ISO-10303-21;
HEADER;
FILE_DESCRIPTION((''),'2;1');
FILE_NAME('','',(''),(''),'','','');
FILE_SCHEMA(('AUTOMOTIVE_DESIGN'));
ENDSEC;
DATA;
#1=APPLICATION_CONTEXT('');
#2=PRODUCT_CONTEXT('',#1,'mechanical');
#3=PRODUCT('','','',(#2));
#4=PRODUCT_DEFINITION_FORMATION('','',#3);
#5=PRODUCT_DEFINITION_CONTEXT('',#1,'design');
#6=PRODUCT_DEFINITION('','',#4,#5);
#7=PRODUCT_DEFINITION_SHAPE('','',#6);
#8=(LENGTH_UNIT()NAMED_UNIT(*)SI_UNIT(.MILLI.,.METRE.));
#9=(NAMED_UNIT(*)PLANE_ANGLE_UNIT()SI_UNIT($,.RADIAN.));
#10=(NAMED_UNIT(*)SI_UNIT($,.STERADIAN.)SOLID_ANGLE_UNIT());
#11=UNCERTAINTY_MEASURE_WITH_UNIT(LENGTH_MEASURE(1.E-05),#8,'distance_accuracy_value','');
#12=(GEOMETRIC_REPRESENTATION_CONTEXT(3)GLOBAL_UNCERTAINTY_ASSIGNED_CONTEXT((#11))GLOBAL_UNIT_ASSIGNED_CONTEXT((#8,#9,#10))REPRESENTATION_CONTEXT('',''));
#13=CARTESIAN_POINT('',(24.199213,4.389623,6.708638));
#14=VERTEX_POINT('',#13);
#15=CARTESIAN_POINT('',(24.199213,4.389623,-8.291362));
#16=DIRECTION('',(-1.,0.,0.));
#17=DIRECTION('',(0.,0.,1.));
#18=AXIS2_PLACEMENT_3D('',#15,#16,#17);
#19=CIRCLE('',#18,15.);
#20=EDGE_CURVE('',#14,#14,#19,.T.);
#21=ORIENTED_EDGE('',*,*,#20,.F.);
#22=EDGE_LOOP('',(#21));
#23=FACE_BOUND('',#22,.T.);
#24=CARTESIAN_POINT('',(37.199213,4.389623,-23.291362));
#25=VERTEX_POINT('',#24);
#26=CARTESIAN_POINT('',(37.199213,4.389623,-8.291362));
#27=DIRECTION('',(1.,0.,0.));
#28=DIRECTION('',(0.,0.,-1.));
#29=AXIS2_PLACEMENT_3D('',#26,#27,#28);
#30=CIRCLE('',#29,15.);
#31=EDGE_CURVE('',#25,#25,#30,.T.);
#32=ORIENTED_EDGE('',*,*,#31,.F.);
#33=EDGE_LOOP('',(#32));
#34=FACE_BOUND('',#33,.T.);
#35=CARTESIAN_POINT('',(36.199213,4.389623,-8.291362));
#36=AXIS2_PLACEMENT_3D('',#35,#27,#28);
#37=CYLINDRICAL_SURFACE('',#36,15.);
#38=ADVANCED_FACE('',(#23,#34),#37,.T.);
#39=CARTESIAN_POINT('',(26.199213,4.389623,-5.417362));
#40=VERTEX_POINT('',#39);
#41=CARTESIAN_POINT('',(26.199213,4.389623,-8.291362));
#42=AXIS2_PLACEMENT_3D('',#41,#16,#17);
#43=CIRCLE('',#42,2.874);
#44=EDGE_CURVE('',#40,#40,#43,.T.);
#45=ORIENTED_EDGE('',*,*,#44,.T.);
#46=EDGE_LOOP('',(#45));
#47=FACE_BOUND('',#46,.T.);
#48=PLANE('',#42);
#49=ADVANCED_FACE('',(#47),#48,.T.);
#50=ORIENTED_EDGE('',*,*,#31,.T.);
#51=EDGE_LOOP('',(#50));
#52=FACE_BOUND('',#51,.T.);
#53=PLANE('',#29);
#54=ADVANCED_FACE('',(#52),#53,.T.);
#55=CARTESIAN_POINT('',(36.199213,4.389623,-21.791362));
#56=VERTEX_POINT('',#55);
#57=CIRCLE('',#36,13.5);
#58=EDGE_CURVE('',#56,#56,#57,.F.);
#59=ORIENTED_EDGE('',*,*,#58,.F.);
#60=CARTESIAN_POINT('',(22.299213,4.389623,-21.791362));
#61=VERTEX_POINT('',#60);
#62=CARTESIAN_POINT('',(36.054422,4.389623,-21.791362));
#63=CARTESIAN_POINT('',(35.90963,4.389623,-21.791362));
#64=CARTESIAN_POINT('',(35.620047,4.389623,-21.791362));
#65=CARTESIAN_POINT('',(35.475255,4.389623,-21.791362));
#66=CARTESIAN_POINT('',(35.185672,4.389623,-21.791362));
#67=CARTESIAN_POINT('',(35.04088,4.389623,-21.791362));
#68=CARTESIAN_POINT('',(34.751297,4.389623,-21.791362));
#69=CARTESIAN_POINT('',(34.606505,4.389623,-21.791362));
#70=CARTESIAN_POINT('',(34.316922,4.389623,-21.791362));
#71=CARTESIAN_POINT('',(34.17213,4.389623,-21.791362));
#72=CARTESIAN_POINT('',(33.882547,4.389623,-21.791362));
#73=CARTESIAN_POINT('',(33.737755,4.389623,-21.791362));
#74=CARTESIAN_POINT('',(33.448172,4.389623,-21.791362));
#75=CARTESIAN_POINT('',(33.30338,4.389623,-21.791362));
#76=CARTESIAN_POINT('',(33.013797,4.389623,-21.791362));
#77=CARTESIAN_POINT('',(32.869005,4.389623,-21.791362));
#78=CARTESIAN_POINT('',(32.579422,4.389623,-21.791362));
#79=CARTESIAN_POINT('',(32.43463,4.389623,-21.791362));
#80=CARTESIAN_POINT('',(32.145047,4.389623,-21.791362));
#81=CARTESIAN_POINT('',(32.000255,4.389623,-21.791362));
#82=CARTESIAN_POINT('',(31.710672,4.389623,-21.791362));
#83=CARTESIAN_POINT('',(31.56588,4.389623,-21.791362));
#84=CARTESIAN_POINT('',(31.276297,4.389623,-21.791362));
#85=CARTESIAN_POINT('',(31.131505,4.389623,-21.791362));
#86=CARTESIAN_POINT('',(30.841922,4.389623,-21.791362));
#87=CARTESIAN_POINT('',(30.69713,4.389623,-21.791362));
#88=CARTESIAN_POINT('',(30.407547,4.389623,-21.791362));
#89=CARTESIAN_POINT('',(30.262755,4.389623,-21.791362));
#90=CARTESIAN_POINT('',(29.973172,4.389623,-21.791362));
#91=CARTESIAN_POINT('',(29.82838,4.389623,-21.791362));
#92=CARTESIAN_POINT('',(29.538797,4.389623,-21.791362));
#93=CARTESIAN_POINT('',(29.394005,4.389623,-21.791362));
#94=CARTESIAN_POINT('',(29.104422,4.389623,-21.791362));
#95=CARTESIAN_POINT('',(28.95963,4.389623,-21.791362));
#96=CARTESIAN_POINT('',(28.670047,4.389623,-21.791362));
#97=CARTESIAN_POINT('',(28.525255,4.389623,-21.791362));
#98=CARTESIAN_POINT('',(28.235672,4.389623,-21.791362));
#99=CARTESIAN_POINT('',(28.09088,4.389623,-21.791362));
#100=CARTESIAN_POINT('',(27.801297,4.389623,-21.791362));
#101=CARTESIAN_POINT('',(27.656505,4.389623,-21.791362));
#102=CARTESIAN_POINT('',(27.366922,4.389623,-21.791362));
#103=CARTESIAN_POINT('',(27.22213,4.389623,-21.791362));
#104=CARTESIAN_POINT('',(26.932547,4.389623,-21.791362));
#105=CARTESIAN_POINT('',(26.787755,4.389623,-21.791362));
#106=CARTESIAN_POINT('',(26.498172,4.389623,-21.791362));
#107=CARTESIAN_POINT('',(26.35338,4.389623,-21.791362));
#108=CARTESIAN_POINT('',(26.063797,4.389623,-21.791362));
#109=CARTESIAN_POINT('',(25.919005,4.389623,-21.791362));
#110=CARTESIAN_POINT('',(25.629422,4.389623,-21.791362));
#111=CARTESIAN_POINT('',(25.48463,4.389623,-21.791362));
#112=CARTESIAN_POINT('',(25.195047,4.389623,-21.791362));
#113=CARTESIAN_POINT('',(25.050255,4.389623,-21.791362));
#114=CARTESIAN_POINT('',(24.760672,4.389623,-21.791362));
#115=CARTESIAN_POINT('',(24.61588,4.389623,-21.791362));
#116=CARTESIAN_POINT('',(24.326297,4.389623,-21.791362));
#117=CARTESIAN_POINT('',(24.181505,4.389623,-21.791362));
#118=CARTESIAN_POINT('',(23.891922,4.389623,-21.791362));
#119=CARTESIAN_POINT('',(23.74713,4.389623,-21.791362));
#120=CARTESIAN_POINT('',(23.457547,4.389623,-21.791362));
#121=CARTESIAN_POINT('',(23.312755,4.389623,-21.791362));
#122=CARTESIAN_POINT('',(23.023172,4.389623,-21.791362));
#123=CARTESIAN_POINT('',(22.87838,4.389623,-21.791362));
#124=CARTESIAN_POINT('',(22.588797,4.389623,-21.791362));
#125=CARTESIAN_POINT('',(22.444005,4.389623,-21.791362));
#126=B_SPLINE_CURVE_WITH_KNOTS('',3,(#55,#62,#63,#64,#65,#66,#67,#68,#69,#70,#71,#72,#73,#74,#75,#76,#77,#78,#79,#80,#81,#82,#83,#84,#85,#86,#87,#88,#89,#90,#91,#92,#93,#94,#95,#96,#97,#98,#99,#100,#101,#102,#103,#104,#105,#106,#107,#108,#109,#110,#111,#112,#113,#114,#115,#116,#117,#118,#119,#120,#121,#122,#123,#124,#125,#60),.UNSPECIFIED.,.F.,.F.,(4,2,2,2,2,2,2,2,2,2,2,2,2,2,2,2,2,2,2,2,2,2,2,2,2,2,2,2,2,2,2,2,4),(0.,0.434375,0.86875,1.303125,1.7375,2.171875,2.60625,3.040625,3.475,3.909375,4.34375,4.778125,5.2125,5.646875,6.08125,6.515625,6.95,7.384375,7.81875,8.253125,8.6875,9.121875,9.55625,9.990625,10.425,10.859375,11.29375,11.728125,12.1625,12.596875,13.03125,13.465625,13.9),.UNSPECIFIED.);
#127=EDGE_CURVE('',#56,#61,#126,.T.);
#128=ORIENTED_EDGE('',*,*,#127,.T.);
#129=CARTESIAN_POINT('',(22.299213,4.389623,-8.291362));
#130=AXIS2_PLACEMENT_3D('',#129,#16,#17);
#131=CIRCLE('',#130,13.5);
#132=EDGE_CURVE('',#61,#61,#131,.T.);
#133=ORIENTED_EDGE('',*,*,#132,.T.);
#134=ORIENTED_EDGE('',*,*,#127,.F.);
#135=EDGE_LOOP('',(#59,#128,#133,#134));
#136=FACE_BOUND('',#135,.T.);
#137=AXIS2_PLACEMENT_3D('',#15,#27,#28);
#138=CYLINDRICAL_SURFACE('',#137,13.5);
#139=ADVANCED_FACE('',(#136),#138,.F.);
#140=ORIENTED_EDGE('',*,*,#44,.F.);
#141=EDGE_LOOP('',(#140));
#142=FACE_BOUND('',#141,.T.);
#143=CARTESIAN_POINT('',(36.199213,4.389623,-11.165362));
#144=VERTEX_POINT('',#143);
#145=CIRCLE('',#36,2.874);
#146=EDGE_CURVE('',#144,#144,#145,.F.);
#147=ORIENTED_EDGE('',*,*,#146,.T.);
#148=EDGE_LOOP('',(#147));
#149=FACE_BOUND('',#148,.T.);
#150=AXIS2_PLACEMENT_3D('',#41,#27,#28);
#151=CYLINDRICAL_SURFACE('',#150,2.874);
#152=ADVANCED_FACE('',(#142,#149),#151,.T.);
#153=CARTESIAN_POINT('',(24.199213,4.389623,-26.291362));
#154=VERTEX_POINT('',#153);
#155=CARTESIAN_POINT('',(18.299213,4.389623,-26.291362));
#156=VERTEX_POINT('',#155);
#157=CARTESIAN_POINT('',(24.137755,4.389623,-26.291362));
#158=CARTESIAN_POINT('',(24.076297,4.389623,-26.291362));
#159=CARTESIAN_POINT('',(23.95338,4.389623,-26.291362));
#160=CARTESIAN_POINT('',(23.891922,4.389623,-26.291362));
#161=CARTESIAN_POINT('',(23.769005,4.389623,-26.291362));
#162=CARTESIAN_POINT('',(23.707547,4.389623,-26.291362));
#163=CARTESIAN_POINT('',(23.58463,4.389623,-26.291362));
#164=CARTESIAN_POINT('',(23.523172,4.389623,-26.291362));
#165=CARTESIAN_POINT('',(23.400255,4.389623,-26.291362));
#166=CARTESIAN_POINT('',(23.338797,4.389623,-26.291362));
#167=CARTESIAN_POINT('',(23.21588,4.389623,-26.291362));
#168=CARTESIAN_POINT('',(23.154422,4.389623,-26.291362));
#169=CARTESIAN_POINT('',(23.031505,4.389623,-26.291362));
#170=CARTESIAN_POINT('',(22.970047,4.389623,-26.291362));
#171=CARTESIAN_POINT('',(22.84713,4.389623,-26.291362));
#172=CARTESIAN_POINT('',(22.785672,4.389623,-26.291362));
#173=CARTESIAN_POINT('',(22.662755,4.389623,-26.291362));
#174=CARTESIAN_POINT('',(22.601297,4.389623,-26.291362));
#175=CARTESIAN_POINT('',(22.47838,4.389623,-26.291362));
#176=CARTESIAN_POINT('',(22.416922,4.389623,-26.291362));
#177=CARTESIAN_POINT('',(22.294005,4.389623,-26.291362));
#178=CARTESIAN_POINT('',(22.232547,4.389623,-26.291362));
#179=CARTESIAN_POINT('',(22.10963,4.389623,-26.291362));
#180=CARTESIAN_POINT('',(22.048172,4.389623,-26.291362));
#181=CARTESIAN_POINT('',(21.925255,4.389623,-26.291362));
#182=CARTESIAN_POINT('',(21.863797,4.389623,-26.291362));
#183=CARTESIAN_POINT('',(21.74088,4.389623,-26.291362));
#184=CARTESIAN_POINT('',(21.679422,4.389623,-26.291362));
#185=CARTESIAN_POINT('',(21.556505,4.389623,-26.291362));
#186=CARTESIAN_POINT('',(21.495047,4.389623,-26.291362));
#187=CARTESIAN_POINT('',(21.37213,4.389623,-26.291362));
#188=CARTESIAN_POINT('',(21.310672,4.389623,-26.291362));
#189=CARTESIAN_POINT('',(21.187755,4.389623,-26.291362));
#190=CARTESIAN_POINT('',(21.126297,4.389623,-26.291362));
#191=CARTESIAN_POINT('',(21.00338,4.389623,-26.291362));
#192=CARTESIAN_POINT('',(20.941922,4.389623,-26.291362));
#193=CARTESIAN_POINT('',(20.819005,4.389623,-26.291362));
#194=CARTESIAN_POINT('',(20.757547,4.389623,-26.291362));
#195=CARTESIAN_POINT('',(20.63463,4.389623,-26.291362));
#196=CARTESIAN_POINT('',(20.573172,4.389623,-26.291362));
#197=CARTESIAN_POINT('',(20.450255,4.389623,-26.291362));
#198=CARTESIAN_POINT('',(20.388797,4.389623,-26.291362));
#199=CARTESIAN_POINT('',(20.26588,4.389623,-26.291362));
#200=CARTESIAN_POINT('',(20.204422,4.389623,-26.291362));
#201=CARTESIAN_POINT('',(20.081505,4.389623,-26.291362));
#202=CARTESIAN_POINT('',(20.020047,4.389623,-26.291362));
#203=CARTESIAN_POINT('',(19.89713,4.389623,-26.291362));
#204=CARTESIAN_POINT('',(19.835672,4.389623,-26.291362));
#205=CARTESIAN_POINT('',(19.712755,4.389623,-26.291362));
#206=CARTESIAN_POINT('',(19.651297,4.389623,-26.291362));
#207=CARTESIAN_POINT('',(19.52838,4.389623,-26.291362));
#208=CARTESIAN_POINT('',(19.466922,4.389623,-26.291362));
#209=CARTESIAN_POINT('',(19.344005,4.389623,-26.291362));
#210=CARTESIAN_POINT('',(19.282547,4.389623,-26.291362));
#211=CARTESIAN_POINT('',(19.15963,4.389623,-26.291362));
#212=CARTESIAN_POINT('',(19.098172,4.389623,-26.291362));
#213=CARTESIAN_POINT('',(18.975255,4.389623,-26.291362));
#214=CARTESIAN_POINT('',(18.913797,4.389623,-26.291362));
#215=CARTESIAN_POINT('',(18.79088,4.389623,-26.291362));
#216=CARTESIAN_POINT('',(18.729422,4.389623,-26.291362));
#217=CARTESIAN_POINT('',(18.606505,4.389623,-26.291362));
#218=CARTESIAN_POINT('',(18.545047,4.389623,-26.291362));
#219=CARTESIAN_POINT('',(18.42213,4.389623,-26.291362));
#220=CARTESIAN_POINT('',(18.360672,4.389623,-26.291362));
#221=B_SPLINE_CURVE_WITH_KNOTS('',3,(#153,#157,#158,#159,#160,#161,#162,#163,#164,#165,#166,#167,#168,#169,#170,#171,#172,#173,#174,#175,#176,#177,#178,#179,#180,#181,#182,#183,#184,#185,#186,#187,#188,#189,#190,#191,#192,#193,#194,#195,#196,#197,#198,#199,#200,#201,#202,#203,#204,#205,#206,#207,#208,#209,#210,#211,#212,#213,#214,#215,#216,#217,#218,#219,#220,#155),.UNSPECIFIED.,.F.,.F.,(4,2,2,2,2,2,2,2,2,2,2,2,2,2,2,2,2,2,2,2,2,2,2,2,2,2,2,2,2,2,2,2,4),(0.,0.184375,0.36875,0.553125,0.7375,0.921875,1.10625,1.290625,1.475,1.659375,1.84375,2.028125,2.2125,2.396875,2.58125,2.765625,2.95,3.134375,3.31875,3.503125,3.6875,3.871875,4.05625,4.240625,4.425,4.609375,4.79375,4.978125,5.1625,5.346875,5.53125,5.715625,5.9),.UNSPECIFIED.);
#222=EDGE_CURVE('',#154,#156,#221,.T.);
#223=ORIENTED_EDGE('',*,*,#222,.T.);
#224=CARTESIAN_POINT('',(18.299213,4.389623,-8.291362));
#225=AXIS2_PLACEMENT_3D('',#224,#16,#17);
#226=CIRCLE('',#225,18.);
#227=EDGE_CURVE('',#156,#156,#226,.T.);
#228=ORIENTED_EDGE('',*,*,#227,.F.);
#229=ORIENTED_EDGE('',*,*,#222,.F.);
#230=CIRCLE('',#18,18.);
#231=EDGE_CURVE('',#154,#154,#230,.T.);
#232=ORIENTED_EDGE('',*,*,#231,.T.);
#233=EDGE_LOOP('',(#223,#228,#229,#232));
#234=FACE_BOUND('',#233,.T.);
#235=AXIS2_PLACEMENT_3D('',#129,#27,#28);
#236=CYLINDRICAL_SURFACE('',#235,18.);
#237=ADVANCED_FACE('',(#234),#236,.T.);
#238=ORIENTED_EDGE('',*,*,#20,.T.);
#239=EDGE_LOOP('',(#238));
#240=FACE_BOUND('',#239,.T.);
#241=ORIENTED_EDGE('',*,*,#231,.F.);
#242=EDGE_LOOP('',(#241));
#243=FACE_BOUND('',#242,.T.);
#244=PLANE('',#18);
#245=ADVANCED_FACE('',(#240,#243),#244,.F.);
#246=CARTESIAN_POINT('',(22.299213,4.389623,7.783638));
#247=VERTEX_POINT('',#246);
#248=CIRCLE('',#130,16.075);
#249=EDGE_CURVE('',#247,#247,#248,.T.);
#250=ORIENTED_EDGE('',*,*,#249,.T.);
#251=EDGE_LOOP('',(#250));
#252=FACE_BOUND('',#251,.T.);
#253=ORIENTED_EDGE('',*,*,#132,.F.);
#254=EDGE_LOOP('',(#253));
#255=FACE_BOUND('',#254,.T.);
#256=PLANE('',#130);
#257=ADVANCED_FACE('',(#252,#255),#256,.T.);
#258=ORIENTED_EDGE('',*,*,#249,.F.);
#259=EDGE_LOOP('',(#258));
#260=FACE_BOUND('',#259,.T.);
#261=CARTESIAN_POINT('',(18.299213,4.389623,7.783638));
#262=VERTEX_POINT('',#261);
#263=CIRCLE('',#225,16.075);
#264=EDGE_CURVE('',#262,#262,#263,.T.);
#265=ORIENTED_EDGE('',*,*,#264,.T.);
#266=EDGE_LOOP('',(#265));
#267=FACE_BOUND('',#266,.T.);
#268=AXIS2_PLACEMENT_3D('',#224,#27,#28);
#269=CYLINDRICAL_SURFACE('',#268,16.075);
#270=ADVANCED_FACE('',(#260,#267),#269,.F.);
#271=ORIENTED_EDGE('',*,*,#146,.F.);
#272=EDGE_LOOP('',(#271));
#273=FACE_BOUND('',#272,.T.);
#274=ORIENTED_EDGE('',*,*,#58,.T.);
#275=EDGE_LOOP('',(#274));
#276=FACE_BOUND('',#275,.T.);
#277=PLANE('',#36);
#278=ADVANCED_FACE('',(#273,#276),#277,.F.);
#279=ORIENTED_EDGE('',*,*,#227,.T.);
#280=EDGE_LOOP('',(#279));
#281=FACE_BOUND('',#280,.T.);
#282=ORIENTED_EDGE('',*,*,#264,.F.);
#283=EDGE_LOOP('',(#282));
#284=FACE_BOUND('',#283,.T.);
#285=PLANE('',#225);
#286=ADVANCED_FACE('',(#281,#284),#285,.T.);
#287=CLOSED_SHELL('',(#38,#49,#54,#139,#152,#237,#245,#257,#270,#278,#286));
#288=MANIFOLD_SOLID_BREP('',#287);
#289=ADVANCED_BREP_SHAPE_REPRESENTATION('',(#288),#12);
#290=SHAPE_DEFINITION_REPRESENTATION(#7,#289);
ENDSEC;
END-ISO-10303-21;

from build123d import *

# Parameters (mm, degrees)
SPUR_START             = 15.199213342
SPUR_GEAR_AM_OUTLINE_R = 1.5
SPUR_GEAR_AM_DEPTH     = 12
SKETCH9_R              = 1.5
BOSS_EXTRUDE1_DEPTH    = 12
SKETCH10_R             = 2.874
BOSS_EXTRUDE2_DEPTH    = 10
SKETCH11_R             = 15
BOSS_EXTRUDE3_DEPTH    = 1
SKETCH12_R             = 15
SKETCH12_R_2           = 13.5
BOSS_EXTRUDE4_DEPTH    = 13
SKETCH13_R             = 18
SKETCH13_R_2           = 13.5
BOSS_EXTRUDE5_DEPTH    = 1.9
SKETCH14_R             = 18
SKETCH14_R_2           = 16.075
BOSS_EXTRUDE6_DEPTH    = 4
SKETCH17_R             = 4
CUT_EXTRUDE2_DEPTH     = 41.416963439
SKETCH19_R             = 2.874
BOSS_EXTRUDE7_DEPTH    = 10


# Read off the part's stored shape, not the designer's step: spur gear_am
with BuildPart() as part:
    # spur gear_am outline → spur gear_am (new body)
    with BuildSketch(Plane.YZ.offset(SPUR_START)):
        with BuildLine():
            ThreePointArc((2.747947228, -4.643773619), (2.654088149, -4.687486435), (2.561391914, -4.733613923))
            ThreePointArc((2.561391914, -4.733613923), (2.561783739, -5.337982285), (2.816889806, -5.88587111))
            ThreePointArc((2.816889806, -5.88587111), (2.597713415, -6.044378226), (2.394409068, -6.222788256))
            ThreePointArc((2.394409068, -6.222788256), (1.9170234, -5.852161498), (1.327895004, -5.717294884))
            ThreePointArc((1.327895004, -5.717294884), (1.262297175, -5.797402699), (1.198794721, -5.879181519))
            ThreePointArc((1.198794721, -5.879181519), (1.461373347, -6.423528591), (1.928936024, -6.806472991))
            ThreePointArc((1.928936024, -6.806472991), (1.800238579, -7.04438004), (1.694476903, -7.293332374))
            ThreePointArc((1.694476903, -7.293332374), (1.103558354, -7.166539081), (0.514255579, -7.300641692))
            ThreePointArc((0.514255579, -7.300641692), (0.489911456, -7.401278171), (0.468180222, -7.502511024))
            ThreePointArc((0.468180222, -7.502511024), (0.940938733, -7.879022193), (1.528351497, -8.021175333))
            ThreePointArc((1.528351497, -8.021175333), (1.515623105, -8.291361907), (1.528351497, -8.56154848))
            ThreePointArc((1.528351497, -8.56154848), (0.940938733, -8.70370162), (0.468180222, -9.080212789))
            ThreePointArc((0.468180222, -9.080212789), (0.489911456, -9.181445642), (0.514255579, -9.28208212))
            ThreePointArc((0.514255579, -9.28208212), (1.103558354, -9.416184732), (1.694476903, -9.289391439))
            ThreePointArc((1.694476903, -9.289391439), (1.800238579, -9.538343772), (1.928936024, -9.776250821))
            ThreePointArc((1.928936024, -9.776250821), (1.461373347, -10.159195221), (1.198794721, -10.703542294))
            ThreePointArc((1.198794721, -10.703542294), (1.262297175, -10.785321114), (1.327895004, -10.865428928))
            ThreePointArc((1.327895004, -10.865428928), (1.9170234, -10.730562315), (2.394409068, -10.359935556))
            ThreePointArc((2.394409068, -10.359935556), (2.597713414, -10.538345587), (2.816889806, -10.696852703))
            ThreePointArc((2.816889806, -10.696852703), (2.561783739, -11.244741528), (2.561391914, -11.84910989))
            ThreePointArc((2.561391914, -11.84910989), (2.654088149, -11.895237378), (2.747947228, -11.938950194))
            ThreePointArc((2.747947228, -11.938950194), (3.220217142, -11.561826343), (3.489517843, -11.020773293))
            ThreePointArc((3.489517843, -11.020773293), (3.750097941, -11.093304726), (4.016342706, -11.14101763))
            ThreePointArc((4.016342706, -11.14101763), (4.024220134, -11.745334779), (4.286092716, -12.290021864))
            ThreePointArc((4.286092716, -12.290021864), (4.389623105, -12.291361906), (4.493153494, -12.290021864))
            ThreePointArc((4.493153494, -12.290021864), (4.755026076, -11.745334779), (4.762903504, -11.14101763))
            ThreePointArc((4.762903504, -11.14101763), (5.029148269, -11.093304726), (5.289728367, -11.020773293))
            ThreePointArc((5.289728367, -11.020773293), (5.559029068, -11.561826343), (6.031298982, -11.938950194))
            ThreePointArc((6.031298982, -11.938950194), (6.125158061, -11.895237378), (6.217854296, -11.84910989))
            ThreePointArc((6.217854296, -11.84910989), (6.217462471, -11.244741528), (5.962356404, -10.696852703))
            ThreePointArc((5.962356404, -10.696852703), (6.181532796, -10.538345587), (6.384837142, -10.359935556))
            ThreePointArc((6.384837142, -10.359935556), (6.86222281, -10.730562315), (7.451351206, -10.865428928))
            ThreePointArc((7.451351206, -10.865428928), (7.516949035, -10.785321114), (7.580451489, -10.703542294))
            ThreePointArc((7.580451489, -10.703542294), (7.317872863, -10.159195221), (6.850310186, -9.776250821))
            ThreePointArc((6.850310186, -9.776250821), (6.979007631, -9.538343772), (7.084769307, -9.289391439))
            ThreePointArc((7.084769307, -9.289391439), (7.675687856, -9.416184732), (8.26499063, -9.28208212))
            ThreePointArc((8.26499063, -9.28208212), (8.289334754, -9.181445642), (8.311065988, -9.080212789))
            ThreePointArc((8.311065988, -9.080212789), (7.838307477, -8.70370162), (7.250894713, -8.56154848))
            ThreePointArc((7.250894713, -8.56154848), (7.263623105, -8.291361907), (7.250894713, -8.021175333))
            ThreePointArc((7.250894713, -8.021175333), (7.838307477, -7.879022193), (8.311065988, -7.502511024))
            ThreePointArc((8.311065988, -7.502511024), (8.289334754, -7.40127817), (8.26499063, -7.300641692))
            ThreePointArc((8.26499063, -7.300641692), (7.675687856, -7.166539081), (7.084769307, -7.293332374))
            ThreePointArc((7.084769307, -7.293332374), (6.979007631, -7.04438004), (6.850310186, -6.806472991))
            ThreePointArc((6.850310186, -6.806472991), (7.317872863, -6.423528591), (7.580451489, -5.879181519))
            ThreePointArc((7.580451489, -5.879181519), (7.516949035, -5.797402699), (7.451351206, -5.717294884))
            ThreePointArc((7.451351206, -5.717294884), (6.86222281, -5.852161498), (6.384837142, -6.222788256))
            ThreePointArc((6.384837142, -6.222788256), (6.181532795, -6.044378226), (5.962356404, -5.88587111))
            ThreePointArc((5.962356404, -5.88587111), (6.217462471, -5.337982285), (6.217854296, -4.733613923))
            ThreePointArc((6.217854296, -4.733613923), (6.125158061, -4.687486435), (6.031298982, -4.643773619))
            ThreePointArc((6.031298982, -4.643773619), (5.559029068, -5.02089747), (5.289728367, -5.56195052))
            ThreePointArc((5.289728367, -5.56195052), (5.029148269, -5.489419087), (4.762903504, -5.441706183))
            ThreePointArc((4.762903504, -5.441706183), (4.755026076, -4.837389034), (4.493153494, -4.292701948))
            ThreePointArc((4.493153494, -4.292701948), (4.389623105, -4.291361906), (4.286092716, -4.292701948))
            ThreePointArc((4.286092716, -4.292701948), (4.024220134, -4.837389034), (4.016342706, -5.441706183))
            ThreePointArc((4.016342706, -5.441706183), (3.750097941, -5.489419087), (3.489517843, -5.56195052))
            ThreePointArc((3.489517843, -5.56195052), (3.220217142, -5.02089747), (2.747947228, -4.643773619))
        make_face()
        with Locations((4.389623105, -8.291361906)):
            Circle(SPUR_GEAR_AM_OUTLINE_R, mode=Mode.SUBTRACT)
    extrude(amount=SPUR_GEAR_AM_DEPTH)

    # Sketch9 → Boss-Extrude1 (add, through all)
    with BuildSketch(Plane(origin=(27.199213342, 0, 0), x_dir=(0, 0, -1), z_dir=(1, 0, 0))):
        with Locations((8.291361906, 4.389623105)):
            Circle(SKETCH9_R)
    extrude(amount=-BOSS_EXTRUDE1_DEPTH)

    # Sketch10 → Boss-Extrude2 (add)
    with BuildSketch(Plane(origin=(27.199213342, 0, 0), x_dir=(0, 0, -1), z_dir=(1, 0, 0))):
        with Locations(Location((8.291361906, 4.389623105, 0), (0, 0, 172.537235833))):
            Circle(SKETCH10_R)
    extrude(amount=BOSS_EXTRUDE2_DEPTH)

    # Sketch11 → Boss-Extrude3 (add)
    with BuildSketch(Plane(origin=(37.199213342, 0, 0), x_dir=(0, 0, -1), z_dir=(1, 0, 0))):
        with Locations((8.291361906, 4.389623105)):
            Circle(SKETCH11_R)
    extrude(amount=-BOSS_EXTRUDE3_DEPTH)

    # Sketch12 → Boss-Extrude4 (add)
    with BuildSketch(Plane.ZY.offset(-37.199213342)):
        with Locations(Location((-8.291361906, 4.389623105, 0), (0, 0, 180))):
            Circle(SKETCH12_R)
        with Locations(Location((-8.291361906, 4.389623105, 0), (0, 0, 180))):
            Circle(SKETCH12_R_2, mode=Mode.SUBTRACT)
    extrude(amount=BOSS_EXTRUDE4_DEPTH)

    # Sketch13 → Boss-Extrude5 (add)
    with BuildSketch(Plane.ZY.offset(-24.199213342)):
        with Locations(Location((-8.291361906, 4.389623105, 0), (0, 0, 180))):
            Circle(SKETCH13_R)
        with Locations(Location((-8.291361906, 4.389623105, 0), (0, 0, 180))):
            Circle(SKETCH13_R_2, mode=Mode.SUBTRACT)
    extrude(amount=BOSS_EXTRUDE5_DEPTH)

    # Sketch14 → Boss-Extrude6 (add)
    with BuildSketch(Plane.ZY.offset(-22.299213342)):
        with Locations(Location((-8.291361906, 4.389623105, 0), (0, 0, 180))):
            Circle(SKETCH14_R)
        with Locations((-8.291361906, 4.389623105)):
            Circle(SKETCH14_R_2, mode=Mode.SUBTRACT)
    extrude(amount=BOSS_EXTRUDE6_DEPTH)

    # Sketch17 → Cut-Extrude2 (cut, through all)
    with BuildSketch(Plane.ZY.offset(-36.199213342)):
        with Locations((-8.291361906, 4.389623105)):
            Circle(SKETCH17_R)
    extrude(amount=CUT_EXTRUDE2_DEPTH, mode=Mode.SUBTRACT)

    # Sketch19 → Boss-Extrude7 (add)
    with BuildSketch(Plane.ZY.offset(-36.199213342)):
        with Locations(Location((-8.291361906, 4.389623105, 0), (0, 0, 180))):
            Circle(SKETCH19_R)
    extrude(amount=BOSS_EXTRUDE7_DEPTH)


solid = part.part
